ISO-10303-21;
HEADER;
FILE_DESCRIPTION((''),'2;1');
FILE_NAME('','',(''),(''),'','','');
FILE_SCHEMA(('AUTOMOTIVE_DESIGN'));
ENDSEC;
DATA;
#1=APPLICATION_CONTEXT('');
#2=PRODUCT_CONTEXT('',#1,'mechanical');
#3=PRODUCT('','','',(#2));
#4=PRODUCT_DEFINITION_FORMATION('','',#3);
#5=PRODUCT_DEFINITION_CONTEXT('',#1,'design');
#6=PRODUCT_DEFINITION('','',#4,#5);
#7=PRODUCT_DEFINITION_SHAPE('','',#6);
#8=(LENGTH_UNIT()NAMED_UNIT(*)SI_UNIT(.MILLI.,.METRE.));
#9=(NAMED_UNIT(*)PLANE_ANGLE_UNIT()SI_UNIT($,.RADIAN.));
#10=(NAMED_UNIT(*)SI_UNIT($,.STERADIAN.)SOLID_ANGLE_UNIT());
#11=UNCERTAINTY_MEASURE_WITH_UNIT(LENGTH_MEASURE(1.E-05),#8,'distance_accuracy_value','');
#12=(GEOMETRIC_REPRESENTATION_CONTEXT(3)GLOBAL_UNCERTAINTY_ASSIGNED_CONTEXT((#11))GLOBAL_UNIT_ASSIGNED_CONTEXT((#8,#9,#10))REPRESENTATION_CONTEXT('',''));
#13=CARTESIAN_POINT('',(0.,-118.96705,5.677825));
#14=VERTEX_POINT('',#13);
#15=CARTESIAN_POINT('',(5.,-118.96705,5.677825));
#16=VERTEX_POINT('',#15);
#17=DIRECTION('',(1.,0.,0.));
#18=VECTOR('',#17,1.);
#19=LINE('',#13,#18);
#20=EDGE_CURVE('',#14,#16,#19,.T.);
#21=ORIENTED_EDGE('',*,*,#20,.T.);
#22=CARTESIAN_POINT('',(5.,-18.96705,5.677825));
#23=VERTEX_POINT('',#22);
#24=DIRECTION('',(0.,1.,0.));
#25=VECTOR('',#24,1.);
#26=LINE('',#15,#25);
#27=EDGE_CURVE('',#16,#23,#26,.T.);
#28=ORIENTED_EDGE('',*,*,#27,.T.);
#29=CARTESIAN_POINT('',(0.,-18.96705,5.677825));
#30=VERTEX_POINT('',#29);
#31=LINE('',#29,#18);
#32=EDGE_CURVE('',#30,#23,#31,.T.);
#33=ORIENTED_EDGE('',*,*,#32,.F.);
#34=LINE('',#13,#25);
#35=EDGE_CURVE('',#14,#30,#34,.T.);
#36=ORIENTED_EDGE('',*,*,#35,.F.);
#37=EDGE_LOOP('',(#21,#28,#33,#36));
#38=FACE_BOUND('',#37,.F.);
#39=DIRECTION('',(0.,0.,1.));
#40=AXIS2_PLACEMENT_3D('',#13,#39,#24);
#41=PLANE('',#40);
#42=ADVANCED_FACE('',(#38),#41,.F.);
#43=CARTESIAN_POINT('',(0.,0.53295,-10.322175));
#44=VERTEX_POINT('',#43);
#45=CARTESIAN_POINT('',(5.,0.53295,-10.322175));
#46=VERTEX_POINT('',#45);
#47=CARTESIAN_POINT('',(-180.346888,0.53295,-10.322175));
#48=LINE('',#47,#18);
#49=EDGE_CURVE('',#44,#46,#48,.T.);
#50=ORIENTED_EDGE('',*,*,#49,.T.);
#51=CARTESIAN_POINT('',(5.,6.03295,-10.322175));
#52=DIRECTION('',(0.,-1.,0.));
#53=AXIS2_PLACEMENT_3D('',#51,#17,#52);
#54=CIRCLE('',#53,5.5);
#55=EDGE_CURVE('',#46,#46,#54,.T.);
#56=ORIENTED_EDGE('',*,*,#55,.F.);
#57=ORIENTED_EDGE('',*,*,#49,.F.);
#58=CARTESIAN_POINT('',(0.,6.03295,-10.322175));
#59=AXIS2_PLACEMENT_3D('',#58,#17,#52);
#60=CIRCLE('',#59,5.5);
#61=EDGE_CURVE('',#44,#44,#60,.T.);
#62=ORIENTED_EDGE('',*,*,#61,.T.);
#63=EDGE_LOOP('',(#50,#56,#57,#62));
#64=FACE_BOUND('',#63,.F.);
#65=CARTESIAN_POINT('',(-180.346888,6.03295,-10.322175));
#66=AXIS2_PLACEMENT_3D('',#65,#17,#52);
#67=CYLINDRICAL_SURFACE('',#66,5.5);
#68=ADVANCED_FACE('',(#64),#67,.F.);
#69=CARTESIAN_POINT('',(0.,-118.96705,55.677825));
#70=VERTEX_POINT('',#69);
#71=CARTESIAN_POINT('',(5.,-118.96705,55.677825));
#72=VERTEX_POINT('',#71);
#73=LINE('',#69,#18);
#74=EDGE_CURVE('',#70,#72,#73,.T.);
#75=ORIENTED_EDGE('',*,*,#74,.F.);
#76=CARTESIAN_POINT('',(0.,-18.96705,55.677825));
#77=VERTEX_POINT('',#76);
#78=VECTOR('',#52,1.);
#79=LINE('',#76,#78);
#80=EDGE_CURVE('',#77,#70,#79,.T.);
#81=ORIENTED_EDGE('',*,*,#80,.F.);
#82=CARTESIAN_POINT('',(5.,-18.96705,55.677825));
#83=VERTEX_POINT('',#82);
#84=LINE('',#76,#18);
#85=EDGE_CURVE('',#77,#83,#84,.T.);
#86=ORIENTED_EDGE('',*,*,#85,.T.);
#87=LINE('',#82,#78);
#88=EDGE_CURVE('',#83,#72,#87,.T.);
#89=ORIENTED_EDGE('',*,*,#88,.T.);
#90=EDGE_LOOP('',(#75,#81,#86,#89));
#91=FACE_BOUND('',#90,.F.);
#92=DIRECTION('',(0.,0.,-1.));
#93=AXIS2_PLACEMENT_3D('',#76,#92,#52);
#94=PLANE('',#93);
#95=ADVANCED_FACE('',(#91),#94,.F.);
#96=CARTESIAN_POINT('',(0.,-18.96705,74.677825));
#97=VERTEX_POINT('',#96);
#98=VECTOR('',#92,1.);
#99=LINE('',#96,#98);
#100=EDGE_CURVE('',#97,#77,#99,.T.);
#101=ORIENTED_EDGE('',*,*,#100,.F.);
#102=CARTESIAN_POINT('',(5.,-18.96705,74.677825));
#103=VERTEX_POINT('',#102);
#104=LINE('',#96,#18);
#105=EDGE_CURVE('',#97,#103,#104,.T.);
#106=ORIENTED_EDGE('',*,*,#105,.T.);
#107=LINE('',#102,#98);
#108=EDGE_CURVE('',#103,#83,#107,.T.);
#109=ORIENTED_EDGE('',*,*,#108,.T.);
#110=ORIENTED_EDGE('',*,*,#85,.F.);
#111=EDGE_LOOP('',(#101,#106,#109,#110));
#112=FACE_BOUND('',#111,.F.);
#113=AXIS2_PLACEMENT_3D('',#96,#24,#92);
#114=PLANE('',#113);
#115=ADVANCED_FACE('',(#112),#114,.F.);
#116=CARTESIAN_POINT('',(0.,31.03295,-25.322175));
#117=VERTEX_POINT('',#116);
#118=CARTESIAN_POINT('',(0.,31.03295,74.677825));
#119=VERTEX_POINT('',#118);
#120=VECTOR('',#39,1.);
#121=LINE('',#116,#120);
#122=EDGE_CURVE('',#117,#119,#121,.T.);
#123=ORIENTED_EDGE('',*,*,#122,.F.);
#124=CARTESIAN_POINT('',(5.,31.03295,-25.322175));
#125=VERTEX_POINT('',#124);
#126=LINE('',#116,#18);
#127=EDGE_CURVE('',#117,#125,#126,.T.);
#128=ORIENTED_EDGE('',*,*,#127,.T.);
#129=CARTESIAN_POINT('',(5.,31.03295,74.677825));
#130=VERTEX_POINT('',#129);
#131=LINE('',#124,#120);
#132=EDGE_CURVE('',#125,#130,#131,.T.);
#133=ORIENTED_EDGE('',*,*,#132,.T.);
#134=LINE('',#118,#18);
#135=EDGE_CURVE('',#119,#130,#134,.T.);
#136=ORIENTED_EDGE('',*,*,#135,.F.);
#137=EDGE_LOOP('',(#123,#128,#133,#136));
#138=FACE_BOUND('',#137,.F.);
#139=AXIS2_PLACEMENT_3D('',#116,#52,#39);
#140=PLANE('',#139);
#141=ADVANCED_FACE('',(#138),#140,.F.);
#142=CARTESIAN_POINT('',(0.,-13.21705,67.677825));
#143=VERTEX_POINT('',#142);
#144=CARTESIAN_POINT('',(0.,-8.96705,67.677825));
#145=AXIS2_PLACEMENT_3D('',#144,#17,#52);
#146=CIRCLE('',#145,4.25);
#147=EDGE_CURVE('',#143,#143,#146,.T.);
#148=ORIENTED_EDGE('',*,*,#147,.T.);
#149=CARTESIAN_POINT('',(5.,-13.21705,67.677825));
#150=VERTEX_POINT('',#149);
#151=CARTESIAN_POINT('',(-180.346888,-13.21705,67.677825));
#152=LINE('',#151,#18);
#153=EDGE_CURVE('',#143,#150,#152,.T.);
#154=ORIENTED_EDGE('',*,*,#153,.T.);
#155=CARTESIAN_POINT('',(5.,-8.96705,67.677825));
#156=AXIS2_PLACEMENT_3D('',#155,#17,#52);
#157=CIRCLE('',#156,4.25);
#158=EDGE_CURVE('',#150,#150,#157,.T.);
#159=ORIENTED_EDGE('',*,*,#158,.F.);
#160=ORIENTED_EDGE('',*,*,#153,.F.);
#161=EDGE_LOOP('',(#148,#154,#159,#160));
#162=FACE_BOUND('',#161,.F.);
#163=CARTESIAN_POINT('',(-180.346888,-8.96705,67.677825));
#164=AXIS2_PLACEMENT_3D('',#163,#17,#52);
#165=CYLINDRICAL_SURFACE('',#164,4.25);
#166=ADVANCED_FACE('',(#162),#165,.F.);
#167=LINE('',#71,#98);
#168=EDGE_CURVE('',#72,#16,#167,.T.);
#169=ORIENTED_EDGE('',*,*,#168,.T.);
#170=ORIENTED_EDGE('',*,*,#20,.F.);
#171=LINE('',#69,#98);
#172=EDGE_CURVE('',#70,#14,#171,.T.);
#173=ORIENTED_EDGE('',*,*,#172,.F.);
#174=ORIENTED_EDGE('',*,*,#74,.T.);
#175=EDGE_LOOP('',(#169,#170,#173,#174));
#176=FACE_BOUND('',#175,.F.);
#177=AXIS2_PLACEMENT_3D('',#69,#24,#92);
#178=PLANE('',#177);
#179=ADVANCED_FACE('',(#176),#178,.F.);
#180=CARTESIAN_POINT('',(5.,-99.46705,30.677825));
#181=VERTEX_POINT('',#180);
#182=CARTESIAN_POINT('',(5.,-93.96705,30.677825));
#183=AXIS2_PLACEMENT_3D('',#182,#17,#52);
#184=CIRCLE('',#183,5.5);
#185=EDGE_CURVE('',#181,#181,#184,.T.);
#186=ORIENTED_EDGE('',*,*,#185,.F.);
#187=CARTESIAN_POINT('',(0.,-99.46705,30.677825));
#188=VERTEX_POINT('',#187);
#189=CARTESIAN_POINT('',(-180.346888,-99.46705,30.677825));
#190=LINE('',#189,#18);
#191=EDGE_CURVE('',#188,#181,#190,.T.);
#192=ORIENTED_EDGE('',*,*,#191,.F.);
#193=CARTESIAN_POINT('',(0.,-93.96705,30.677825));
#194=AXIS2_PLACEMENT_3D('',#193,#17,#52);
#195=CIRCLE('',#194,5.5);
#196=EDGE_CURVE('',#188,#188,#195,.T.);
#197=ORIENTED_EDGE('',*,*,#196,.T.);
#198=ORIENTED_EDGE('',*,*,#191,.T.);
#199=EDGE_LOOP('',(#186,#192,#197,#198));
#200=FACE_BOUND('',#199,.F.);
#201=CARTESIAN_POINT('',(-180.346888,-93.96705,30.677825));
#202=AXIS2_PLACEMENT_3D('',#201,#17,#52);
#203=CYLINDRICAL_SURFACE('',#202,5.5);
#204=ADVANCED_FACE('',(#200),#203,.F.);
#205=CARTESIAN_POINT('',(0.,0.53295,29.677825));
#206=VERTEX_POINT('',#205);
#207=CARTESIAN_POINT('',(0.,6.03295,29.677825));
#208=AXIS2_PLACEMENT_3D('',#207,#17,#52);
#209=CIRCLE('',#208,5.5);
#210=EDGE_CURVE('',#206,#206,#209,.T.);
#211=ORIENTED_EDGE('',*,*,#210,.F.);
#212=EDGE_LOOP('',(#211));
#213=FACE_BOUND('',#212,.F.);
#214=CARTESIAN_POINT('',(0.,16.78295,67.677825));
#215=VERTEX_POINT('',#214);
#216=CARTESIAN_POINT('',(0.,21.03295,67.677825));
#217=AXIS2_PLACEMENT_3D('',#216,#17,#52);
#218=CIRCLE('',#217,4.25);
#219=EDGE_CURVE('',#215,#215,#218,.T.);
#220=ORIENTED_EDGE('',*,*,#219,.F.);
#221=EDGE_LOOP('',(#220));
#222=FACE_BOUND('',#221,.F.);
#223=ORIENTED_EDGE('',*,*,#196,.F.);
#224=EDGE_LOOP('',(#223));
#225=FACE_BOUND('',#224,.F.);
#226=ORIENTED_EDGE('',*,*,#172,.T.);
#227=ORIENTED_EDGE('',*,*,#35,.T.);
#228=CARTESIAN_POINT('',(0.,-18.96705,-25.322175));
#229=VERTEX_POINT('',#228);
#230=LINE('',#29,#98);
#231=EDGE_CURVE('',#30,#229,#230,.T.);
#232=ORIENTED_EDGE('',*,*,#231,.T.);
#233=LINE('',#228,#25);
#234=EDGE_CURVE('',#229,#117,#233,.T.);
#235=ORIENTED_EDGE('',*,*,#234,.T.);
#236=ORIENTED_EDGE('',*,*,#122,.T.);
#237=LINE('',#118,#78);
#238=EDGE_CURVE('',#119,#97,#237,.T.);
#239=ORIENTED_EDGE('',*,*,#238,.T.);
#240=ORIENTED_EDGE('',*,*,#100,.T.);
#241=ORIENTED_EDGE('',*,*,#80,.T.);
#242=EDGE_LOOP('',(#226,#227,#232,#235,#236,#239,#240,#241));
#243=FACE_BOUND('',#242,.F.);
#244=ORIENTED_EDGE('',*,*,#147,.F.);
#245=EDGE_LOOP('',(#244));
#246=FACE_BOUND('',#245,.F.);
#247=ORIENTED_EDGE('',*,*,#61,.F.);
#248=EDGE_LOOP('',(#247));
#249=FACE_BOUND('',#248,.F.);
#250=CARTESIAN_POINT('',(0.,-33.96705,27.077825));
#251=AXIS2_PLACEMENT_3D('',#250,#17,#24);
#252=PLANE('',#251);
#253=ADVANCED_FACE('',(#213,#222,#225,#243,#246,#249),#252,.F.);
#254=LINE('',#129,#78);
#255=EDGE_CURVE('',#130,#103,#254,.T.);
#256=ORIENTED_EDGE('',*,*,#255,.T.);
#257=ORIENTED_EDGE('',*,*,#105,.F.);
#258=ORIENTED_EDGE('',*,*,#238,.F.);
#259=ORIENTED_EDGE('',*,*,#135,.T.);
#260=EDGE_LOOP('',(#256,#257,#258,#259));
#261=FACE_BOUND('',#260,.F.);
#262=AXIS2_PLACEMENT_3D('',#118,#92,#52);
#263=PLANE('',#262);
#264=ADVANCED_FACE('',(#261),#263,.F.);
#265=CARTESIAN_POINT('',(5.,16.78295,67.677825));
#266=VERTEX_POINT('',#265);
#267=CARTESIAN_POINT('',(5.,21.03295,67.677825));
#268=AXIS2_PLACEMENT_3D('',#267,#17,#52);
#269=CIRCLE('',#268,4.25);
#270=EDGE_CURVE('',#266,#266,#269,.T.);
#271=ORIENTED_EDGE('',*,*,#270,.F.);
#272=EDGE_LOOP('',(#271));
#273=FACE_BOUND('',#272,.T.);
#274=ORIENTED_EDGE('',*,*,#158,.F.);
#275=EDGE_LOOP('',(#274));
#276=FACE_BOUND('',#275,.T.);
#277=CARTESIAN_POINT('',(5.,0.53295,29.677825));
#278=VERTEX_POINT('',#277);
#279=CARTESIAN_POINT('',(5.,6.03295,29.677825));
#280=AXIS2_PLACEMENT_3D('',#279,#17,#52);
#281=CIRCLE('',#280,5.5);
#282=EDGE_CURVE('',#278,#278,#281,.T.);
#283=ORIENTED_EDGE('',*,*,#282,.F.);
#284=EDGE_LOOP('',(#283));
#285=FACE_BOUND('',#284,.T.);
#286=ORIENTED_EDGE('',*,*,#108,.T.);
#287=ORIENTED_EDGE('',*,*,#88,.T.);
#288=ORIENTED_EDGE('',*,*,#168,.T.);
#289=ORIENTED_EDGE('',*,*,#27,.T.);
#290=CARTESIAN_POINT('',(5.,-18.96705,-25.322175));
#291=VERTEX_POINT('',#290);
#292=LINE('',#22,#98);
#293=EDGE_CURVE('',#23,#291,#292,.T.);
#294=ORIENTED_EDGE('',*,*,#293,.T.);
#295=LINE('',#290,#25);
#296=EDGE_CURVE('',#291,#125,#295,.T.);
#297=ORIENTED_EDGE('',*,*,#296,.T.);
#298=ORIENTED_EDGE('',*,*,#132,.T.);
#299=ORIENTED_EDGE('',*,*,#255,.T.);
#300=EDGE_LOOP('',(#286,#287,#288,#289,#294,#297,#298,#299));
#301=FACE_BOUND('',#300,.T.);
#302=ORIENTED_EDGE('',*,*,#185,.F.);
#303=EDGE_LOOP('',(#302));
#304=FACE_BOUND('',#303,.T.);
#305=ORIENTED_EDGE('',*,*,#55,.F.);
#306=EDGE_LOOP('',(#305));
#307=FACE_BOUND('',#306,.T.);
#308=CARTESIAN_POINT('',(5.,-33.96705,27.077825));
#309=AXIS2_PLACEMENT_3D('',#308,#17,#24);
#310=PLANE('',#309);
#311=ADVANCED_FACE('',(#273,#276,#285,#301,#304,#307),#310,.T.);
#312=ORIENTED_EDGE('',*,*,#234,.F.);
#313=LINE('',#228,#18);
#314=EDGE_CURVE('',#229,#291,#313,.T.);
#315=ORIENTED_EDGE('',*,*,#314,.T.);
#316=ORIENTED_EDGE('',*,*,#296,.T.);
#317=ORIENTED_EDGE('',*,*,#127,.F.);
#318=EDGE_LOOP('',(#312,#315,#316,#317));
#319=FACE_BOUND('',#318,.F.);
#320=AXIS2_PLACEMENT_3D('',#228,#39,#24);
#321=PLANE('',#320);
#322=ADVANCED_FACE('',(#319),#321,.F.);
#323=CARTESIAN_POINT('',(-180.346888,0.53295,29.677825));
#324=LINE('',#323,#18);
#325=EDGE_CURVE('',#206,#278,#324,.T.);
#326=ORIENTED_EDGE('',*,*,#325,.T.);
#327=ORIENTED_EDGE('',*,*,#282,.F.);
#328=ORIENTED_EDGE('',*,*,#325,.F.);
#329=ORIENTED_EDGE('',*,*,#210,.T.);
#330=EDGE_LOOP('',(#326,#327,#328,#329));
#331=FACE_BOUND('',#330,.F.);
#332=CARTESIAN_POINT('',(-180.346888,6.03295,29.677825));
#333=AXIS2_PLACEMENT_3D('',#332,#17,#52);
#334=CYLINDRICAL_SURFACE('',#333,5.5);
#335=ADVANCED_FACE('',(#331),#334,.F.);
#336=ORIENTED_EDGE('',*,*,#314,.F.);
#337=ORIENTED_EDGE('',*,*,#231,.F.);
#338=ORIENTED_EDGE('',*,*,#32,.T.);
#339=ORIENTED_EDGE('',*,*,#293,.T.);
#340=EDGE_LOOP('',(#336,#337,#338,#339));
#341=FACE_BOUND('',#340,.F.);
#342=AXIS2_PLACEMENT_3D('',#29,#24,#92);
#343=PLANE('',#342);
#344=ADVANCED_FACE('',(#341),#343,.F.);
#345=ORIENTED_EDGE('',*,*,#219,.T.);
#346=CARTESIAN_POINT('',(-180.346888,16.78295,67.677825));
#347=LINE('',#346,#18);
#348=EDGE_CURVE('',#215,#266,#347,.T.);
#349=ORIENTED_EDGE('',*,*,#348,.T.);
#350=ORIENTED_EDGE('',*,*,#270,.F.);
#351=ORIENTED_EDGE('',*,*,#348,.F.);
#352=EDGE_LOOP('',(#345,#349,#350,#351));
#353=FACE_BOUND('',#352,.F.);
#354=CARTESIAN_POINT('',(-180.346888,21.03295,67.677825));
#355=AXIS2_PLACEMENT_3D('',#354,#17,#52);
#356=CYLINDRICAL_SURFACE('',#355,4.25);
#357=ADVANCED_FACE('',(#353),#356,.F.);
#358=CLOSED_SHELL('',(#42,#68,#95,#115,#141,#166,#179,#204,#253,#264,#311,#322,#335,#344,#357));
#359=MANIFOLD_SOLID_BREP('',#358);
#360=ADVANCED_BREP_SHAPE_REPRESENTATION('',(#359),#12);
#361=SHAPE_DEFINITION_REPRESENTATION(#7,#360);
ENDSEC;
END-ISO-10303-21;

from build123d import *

# Parameters (mm, degrees)
F1_DEPTH = 5
F2_D     = 8.5
F3_D     = 11


# Not quite as in the source:
# - a feature names something its author has since deleted; it is built from what else it names


with BuildPart() as f1:
    # F0 (on Right) → F1 (new body)
    with BuildSketch(Plane.YZ):
        Polygon((31.0329496861, 74.6778247207), (-18.9670503139, 74.6778247207), (-18.9670503139, 55.6778247207), (-118.9670503139, 55.6778247207), (-118.9670503139, 5.6778247207), (-18.9670503139, 5.6778247207), (-18.9670503139, -25.3221752793), (31.0329496861, -25.3221752793), align=None)
    extrude(amount=F1_DEPTH)

    # F2 (through all)
    with Locations(Plane(origin=(0, 0, 0), x_dir=(0, 1, 0), z_dir=(-1, 0, 0))):
        with Locations((-8.9670503139, -67.6778247207), (21.0329496861, -67.6778247207)):
            Hole(F2_D / 2)

    # F3 (through all)
    with Locations(Plane(origin=(0, 0, 0), x_dir=(0, 1, 0), z_dir=(-1, 0, 0))):
        with Locations((6.0329496861, -29.6778247207), (6.0329496861, 10.3221752793), (-93.9670503139, -30.6778247207)):
            Hole(F3_D / 2)


solid = f1.part
